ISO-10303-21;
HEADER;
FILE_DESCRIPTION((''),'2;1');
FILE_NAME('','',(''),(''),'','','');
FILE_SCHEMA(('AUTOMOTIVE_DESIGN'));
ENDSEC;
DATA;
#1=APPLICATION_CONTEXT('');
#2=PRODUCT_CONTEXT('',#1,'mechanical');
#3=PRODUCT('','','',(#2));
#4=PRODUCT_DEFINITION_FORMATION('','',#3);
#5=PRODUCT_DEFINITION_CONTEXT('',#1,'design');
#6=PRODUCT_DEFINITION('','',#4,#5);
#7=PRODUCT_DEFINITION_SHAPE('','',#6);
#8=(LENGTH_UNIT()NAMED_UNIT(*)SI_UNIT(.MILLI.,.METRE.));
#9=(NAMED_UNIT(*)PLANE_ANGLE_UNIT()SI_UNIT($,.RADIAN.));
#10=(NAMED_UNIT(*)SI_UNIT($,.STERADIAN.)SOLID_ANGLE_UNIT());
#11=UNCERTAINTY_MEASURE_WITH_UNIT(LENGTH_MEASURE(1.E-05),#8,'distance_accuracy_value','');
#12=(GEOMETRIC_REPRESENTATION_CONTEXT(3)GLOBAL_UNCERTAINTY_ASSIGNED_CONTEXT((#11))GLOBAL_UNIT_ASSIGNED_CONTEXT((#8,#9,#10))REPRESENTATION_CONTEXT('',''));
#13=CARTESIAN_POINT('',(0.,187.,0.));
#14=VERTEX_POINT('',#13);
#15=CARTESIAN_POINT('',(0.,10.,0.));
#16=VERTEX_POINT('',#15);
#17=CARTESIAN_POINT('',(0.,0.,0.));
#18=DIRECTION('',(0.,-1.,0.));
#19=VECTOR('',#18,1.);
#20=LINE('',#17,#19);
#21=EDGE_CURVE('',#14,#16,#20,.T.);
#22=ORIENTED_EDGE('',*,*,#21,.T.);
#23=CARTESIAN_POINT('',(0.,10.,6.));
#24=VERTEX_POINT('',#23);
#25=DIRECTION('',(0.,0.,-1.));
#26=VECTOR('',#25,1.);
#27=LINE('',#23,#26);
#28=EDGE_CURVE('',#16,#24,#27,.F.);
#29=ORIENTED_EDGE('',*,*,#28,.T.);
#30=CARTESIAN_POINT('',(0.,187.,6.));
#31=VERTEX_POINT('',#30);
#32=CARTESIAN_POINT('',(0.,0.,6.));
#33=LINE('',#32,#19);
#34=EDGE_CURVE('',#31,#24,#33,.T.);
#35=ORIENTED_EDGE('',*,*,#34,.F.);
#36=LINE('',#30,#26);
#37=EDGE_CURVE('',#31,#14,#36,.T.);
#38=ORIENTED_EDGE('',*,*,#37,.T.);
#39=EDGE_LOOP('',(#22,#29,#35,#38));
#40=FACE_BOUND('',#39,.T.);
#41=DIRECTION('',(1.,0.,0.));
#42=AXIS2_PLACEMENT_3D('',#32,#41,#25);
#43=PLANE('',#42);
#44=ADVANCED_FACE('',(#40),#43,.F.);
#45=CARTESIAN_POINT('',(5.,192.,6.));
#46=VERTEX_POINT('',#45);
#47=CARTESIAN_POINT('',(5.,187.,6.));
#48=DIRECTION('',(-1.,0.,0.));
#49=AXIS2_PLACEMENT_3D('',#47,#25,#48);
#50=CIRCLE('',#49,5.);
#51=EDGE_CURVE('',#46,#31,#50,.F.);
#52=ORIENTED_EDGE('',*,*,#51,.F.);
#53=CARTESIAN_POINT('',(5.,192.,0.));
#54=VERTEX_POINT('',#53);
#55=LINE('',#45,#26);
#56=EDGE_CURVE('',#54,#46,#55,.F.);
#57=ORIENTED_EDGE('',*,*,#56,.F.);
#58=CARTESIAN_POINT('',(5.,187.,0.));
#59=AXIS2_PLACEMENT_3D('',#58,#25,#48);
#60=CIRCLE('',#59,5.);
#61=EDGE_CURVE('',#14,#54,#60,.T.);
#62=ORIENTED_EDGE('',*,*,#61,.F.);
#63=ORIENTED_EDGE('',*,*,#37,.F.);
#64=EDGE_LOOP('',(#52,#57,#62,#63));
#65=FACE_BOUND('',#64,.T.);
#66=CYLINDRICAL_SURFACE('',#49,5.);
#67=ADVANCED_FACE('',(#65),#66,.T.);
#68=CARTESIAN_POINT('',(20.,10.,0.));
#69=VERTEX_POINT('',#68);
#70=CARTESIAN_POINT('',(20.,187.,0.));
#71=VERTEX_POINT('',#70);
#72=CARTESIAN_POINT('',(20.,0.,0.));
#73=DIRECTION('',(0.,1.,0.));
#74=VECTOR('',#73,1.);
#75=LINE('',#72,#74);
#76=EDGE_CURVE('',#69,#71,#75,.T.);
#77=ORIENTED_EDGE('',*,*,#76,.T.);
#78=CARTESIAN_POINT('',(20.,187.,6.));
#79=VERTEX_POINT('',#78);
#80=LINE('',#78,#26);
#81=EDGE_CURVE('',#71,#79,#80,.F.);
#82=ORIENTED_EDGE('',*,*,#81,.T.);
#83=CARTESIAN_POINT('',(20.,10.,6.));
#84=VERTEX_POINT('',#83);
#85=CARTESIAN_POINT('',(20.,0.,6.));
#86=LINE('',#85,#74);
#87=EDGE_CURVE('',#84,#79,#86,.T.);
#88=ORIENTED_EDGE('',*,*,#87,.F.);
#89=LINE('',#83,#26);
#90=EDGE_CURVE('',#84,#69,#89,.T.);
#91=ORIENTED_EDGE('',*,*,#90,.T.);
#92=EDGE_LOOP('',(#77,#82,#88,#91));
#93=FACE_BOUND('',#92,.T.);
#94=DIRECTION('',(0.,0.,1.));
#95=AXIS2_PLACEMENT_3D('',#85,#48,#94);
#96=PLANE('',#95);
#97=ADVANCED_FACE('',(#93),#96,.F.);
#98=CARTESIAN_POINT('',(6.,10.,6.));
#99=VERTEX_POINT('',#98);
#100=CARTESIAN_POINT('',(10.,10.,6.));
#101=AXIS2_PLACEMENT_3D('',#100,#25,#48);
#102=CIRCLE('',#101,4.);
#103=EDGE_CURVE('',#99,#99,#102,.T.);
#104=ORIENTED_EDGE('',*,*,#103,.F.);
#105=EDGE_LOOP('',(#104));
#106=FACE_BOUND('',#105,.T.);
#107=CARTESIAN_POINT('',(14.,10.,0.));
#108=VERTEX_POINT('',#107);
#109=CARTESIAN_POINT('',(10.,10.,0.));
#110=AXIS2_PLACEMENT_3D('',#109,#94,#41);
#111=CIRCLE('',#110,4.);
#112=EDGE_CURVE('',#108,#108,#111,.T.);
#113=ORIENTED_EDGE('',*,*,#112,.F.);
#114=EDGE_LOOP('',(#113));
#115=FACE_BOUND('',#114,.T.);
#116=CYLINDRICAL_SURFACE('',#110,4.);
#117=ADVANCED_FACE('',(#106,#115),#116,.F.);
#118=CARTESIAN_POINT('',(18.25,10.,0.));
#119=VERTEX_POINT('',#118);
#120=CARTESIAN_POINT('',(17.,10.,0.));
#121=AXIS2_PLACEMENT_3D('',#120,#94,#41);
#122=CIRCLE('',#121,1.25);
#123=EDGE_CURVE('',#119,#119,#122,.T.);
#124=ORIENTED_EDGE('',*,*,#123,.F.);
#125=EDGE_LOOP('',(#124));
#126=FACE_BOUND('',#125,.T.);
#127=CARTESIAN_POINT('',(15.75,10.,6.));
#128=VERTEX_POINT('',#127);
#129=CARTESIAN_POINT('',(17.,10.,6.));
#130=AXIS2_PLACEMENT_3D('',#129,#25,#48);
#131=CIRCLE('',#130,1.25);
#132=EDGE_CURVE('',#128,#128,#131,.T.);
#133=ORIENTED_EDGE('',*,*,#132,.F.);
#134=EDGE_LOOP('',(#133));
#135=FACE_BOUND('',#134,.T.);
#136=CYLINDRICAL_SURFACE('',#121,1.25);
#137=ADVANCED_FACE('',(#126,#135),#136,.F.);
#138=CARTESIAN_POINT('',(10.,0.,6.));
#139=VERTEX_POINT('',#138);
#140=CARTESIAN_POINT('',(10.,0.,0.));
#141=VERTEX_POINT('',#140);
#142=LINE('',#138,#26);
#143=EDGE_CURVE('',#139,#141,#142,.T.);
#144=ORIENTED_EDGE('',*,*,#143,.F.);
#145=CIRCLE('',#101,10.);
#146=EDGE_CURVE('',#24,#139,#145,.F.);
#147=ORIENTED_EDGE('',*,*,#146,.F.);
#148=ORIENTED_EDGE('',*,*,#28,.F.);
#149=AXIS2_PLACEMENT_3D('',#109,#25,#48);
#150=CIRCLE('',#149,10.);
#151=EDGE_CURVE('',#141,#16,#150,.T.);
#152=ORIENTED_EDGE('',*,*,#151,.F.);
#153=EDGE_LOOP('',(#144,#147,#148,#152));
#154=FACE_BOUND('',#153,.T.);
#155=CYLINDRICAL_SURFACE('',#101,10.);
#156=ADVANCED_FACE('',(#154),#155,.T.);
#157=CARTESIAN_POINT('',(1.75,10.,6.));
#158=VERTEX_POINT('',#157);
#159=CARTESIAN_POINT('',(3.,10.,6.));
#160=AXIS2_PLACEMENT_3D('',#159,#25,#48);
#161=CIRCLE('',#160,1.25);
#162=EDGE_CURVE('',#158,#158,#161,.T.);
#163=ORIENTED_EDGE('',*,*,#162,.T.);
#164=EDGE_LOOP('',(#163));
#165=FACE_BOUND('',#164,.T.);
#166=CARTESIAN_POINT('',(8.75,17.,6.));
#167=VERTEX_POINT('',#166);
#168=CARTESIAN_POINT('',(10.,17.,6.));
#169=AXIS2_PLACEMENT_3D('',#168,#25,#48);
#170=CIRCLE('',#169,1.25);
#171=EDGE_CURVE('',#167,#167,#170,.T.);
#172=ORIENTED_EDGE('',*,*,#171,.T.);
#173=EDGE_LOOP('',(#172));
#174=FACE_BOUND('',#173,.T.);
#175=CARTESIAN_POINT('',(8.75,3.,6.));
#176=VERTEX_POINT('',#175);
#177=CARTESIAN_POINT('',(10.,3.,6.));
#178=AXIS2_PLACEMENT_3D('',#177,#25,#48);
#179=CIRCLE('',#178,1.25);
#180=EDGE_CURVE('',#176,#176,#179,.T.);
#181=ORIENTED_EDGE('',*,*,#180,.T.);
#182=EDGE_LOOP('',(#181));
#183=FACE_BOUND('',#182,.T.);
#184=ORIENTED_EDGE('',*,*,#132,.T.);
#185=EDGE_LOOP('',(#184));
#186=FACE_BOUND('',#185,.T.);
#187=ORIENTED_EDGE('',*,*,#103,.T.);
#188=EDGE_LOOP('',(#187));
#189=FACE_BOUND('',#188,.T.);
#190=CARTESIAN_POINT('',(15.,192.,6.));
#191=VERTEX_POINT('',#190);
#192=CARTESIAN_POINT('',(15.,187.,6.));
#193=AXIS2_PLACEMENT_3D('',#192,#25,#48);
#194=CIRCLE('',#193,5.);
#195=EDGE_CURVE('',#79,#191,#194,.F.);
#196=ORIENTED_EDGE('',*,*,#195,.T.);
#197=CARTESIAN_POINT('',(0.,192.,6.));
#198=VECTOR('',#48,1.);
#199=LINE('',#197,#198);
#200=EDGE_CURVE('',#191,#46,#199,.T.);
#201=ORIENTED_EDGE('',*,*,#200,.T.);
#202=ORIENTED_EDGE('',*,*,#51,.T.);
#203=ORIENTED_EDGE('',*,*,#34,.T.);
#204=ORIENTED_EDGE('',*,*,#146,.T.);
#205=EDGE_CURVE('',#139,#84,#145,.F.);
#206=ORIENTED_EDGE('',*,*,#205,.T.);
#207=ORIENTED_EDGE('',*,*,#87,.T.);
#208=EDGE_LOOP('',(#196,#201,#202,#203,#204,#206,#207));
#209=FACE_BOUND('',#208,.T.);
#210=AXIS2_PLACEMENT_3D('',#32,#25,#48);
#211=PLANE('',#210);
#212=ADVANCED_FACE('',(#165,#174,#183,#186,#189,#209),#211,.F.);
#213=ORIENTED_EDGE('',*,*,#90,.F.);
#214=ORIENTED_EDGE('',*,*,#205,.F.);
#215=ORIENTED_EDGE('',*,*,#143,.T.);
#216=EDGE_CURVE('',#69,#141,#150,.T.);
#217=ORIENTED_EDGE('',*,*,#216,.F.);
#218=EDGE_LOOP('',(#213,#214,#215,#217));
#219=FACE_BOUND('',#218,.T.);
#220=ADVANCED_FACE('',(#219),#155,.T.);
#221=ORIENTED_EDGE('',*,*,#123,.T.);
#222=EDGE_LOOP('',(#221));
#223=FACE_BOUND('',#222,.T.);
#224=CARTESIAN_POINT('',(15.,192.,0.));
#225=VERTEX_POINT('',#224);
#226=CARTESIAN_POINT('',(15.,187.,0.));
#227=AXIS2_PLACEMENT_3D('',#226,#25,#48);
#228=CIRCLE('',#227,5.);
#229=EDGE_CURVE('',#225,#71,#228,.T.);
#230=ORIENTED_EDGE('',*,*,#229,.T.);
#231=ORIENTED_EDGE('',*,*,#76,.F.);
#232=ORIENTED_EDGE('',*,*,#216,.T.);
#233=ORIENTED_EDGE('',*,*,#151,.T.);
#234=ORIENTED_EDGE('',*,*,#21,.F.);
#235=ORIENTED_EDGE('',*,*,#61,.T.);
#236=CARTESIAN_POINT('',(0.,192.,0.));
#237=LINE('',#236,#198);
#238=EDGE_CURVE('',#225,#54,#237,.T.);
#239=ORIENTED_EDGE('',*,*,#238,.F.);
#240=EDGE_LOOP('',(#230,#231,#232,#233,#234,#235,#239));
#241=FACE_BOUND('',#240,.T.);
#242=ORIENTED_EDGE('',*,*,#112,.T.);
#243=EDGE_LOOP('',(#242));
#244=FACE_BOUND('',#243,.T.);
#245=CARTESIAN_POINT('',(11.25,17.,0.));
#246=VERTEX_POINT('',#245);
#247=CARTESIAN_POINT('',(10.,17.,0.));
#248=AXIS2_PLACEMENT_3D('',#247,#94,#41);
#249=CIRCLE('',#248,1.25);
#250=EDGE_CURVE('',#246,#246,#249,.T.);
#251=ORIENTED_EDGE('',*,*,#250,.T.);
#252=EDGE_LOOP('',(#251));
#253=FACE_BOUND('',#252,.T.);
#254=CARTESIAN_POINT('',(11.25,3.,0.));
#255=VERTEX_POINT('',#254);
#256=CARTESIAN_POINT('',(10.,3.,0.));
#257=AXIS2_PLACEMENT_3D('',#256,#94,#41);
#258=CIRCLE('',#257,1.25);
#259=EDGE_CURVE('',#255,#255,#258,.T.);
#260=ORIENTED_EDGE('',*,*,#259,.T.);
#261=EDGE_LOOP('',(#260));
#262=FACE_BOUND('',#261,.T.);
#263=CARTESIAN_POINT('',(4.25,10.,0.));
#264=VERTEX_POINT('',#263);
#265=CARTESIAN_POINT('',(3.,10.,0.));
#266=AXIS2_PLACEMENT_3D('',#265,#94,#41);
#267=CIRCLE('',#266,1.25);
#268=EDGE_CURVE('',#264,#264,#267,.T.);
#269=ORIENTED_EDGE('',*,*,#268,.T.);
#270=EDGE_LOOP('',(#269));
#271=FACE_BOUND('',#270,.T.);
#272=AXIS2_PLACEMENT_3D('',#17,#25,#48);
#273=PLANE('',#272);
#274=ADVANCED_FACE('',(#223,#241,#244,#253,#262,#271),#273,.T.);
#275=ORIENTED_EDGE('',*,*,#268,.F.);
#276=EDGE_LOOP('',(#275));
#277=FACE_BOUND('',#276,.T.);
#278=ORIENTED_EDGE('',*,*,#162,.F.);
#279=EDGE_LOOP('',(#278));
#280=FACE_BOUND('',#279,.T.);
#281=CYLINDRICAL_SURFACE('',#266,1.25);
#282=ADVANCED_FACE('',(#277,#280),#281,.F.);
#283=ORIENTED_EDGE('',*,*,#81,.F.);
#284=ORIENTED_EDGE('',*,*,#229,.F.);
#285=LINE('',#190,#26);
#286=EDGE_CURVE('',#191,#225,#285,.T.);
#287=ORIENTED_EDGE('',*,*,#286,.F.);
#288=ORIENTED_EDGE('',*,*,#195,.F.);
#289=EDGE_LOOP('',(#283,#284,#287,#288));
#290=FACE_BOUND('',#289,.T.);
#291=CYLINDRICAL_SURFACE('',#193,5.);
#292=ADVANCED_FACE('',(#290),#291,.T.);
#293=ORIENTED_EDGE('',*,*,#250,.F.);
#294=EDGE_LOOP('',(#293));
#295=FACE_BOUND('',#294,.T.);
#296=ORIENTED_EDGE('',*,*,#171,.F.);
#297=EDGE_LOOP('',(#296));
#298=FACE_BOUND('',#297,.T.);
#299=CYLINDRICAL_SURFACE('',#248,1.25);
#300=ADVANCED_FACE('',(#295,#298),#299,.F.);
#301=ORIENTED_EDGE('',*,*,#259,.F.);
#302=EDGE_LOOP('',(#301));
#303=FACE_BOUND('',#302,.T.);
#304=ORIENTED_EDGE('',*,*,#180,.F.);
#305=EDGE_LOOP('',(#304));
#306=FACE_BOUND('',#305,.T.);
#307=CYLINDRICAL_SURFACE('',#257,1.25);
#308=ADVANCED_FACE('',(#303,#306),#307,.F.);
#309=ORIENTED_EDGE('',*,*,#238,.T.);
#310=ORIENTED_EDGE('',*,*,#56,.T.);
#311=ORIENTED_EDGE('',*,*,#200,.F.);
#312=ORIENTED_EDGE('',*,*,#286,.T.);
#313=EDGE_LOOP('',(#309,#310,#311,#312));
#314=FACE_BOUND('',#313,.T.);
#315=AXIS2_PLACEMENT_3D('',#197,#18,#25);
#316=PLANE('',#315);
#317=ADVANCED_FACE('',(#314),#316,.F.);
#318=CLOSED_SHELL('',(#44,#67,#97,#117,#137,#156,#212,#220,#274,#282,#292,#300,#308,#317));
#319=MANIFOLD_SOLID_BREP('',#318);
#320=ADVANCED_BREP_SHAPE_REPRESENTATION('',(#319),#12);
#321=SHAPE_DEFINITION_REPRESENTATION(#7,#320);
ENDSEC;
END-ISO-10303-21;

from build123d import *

# Parameters (mm, degrees)
ESQUISSE1_W                  = 20
ESQUISSE1_H                  = 192
BOSS_EXTRU_1_DEPTH           = 6
ENL_V_MAT_EXTRU_1_DEPTH      = 194.132079158
ENL_V_MAT_EXTRU_1_DEPTH_BACK = 194.132079158
ESQUISSE2_R                  = 4
CONG_1_R                     = 10
CONG_2_R                     = 5
ENL_V_MAT_EXTRU_2_DEPTH      = 194.132079158
ENL_V_MAT_EXTRU_2_DEPTH_BACK = 194.132079158
ESQUISSE3_R                  = 1.25


with BuildPart() as part:
    # Esquisse1 → Boss.-Extru.1 (new body)
    with BuildSketch(Plane.XY):
        with Locations((10, 96)):
            Rectangle(ESQUISSE1_W, ESQUISSE1_H)
    extrude(amount=BOSS_EXTRU_1_DEPTH)

    # Esquisse2 → Enlèv. mat.-Extru.1 (cut, two sides: drawn at the far end of the back side and taken through both)
    with BuildSketch(Plane.XY.offset(6).offset(-ENL_V_MAT_EXTRU_1_DEPTH_BACK)):
        with Locations((10, 10)):
            Circle(ESQUISSE2_R)
    extrude(amount=ENL_V_MAT_EXTRU_1_DEPTH + ENL_V_MAT_EXTRU_1_DEPTH_BACK, mode=Mode.SUBTRACT)

    # Congé1
    cong_1_edges = [part.edges().sort_by_distance(p)[0] for p in [
        (20, 0, 3),
        (0, 0, 3),
    ]]
    fillet(cong_1_edges, radius=CONG_1_R - 0.0001)  # a hair under: the kernel refuses the full size

    # Congé2
    cong_2_edges = [part.edges().sort_by_distance(p)[0] for p in [
        (0, 192, 3),
        (20, 192, 3),
    ]]
    fillet(cong_2_edges, radius=CONG_2_R)

    # Esquisse3 → Enlèv. mat.-Extru.2 (cut, two sides: drawn at the far end of the back side and taken through both)
    with BuildSketch(Plane.XY.offset(6).offset(-ENL_V_MAT_EXTRU_2_DEPTH_BACK)):
        with Locations((10, 17)):
            Circle(ESQUISSE3_R)
        with Locations((17, 10)):
            Circle(ESQUISSE3_R)
        with Locations((10, 3)):
            Circle(ESQUISSE3_R)
        with Locations((3, 10)):
            Circle(ESQUISSE3_R)
    extrude(amount=ENL_V_MAT_EXTRU_2_DEPTH + ENL_V_MAT_EXTRU_2_DEPTH_BACK, mode=Mode.SUBTRACT)


solid = part.part
